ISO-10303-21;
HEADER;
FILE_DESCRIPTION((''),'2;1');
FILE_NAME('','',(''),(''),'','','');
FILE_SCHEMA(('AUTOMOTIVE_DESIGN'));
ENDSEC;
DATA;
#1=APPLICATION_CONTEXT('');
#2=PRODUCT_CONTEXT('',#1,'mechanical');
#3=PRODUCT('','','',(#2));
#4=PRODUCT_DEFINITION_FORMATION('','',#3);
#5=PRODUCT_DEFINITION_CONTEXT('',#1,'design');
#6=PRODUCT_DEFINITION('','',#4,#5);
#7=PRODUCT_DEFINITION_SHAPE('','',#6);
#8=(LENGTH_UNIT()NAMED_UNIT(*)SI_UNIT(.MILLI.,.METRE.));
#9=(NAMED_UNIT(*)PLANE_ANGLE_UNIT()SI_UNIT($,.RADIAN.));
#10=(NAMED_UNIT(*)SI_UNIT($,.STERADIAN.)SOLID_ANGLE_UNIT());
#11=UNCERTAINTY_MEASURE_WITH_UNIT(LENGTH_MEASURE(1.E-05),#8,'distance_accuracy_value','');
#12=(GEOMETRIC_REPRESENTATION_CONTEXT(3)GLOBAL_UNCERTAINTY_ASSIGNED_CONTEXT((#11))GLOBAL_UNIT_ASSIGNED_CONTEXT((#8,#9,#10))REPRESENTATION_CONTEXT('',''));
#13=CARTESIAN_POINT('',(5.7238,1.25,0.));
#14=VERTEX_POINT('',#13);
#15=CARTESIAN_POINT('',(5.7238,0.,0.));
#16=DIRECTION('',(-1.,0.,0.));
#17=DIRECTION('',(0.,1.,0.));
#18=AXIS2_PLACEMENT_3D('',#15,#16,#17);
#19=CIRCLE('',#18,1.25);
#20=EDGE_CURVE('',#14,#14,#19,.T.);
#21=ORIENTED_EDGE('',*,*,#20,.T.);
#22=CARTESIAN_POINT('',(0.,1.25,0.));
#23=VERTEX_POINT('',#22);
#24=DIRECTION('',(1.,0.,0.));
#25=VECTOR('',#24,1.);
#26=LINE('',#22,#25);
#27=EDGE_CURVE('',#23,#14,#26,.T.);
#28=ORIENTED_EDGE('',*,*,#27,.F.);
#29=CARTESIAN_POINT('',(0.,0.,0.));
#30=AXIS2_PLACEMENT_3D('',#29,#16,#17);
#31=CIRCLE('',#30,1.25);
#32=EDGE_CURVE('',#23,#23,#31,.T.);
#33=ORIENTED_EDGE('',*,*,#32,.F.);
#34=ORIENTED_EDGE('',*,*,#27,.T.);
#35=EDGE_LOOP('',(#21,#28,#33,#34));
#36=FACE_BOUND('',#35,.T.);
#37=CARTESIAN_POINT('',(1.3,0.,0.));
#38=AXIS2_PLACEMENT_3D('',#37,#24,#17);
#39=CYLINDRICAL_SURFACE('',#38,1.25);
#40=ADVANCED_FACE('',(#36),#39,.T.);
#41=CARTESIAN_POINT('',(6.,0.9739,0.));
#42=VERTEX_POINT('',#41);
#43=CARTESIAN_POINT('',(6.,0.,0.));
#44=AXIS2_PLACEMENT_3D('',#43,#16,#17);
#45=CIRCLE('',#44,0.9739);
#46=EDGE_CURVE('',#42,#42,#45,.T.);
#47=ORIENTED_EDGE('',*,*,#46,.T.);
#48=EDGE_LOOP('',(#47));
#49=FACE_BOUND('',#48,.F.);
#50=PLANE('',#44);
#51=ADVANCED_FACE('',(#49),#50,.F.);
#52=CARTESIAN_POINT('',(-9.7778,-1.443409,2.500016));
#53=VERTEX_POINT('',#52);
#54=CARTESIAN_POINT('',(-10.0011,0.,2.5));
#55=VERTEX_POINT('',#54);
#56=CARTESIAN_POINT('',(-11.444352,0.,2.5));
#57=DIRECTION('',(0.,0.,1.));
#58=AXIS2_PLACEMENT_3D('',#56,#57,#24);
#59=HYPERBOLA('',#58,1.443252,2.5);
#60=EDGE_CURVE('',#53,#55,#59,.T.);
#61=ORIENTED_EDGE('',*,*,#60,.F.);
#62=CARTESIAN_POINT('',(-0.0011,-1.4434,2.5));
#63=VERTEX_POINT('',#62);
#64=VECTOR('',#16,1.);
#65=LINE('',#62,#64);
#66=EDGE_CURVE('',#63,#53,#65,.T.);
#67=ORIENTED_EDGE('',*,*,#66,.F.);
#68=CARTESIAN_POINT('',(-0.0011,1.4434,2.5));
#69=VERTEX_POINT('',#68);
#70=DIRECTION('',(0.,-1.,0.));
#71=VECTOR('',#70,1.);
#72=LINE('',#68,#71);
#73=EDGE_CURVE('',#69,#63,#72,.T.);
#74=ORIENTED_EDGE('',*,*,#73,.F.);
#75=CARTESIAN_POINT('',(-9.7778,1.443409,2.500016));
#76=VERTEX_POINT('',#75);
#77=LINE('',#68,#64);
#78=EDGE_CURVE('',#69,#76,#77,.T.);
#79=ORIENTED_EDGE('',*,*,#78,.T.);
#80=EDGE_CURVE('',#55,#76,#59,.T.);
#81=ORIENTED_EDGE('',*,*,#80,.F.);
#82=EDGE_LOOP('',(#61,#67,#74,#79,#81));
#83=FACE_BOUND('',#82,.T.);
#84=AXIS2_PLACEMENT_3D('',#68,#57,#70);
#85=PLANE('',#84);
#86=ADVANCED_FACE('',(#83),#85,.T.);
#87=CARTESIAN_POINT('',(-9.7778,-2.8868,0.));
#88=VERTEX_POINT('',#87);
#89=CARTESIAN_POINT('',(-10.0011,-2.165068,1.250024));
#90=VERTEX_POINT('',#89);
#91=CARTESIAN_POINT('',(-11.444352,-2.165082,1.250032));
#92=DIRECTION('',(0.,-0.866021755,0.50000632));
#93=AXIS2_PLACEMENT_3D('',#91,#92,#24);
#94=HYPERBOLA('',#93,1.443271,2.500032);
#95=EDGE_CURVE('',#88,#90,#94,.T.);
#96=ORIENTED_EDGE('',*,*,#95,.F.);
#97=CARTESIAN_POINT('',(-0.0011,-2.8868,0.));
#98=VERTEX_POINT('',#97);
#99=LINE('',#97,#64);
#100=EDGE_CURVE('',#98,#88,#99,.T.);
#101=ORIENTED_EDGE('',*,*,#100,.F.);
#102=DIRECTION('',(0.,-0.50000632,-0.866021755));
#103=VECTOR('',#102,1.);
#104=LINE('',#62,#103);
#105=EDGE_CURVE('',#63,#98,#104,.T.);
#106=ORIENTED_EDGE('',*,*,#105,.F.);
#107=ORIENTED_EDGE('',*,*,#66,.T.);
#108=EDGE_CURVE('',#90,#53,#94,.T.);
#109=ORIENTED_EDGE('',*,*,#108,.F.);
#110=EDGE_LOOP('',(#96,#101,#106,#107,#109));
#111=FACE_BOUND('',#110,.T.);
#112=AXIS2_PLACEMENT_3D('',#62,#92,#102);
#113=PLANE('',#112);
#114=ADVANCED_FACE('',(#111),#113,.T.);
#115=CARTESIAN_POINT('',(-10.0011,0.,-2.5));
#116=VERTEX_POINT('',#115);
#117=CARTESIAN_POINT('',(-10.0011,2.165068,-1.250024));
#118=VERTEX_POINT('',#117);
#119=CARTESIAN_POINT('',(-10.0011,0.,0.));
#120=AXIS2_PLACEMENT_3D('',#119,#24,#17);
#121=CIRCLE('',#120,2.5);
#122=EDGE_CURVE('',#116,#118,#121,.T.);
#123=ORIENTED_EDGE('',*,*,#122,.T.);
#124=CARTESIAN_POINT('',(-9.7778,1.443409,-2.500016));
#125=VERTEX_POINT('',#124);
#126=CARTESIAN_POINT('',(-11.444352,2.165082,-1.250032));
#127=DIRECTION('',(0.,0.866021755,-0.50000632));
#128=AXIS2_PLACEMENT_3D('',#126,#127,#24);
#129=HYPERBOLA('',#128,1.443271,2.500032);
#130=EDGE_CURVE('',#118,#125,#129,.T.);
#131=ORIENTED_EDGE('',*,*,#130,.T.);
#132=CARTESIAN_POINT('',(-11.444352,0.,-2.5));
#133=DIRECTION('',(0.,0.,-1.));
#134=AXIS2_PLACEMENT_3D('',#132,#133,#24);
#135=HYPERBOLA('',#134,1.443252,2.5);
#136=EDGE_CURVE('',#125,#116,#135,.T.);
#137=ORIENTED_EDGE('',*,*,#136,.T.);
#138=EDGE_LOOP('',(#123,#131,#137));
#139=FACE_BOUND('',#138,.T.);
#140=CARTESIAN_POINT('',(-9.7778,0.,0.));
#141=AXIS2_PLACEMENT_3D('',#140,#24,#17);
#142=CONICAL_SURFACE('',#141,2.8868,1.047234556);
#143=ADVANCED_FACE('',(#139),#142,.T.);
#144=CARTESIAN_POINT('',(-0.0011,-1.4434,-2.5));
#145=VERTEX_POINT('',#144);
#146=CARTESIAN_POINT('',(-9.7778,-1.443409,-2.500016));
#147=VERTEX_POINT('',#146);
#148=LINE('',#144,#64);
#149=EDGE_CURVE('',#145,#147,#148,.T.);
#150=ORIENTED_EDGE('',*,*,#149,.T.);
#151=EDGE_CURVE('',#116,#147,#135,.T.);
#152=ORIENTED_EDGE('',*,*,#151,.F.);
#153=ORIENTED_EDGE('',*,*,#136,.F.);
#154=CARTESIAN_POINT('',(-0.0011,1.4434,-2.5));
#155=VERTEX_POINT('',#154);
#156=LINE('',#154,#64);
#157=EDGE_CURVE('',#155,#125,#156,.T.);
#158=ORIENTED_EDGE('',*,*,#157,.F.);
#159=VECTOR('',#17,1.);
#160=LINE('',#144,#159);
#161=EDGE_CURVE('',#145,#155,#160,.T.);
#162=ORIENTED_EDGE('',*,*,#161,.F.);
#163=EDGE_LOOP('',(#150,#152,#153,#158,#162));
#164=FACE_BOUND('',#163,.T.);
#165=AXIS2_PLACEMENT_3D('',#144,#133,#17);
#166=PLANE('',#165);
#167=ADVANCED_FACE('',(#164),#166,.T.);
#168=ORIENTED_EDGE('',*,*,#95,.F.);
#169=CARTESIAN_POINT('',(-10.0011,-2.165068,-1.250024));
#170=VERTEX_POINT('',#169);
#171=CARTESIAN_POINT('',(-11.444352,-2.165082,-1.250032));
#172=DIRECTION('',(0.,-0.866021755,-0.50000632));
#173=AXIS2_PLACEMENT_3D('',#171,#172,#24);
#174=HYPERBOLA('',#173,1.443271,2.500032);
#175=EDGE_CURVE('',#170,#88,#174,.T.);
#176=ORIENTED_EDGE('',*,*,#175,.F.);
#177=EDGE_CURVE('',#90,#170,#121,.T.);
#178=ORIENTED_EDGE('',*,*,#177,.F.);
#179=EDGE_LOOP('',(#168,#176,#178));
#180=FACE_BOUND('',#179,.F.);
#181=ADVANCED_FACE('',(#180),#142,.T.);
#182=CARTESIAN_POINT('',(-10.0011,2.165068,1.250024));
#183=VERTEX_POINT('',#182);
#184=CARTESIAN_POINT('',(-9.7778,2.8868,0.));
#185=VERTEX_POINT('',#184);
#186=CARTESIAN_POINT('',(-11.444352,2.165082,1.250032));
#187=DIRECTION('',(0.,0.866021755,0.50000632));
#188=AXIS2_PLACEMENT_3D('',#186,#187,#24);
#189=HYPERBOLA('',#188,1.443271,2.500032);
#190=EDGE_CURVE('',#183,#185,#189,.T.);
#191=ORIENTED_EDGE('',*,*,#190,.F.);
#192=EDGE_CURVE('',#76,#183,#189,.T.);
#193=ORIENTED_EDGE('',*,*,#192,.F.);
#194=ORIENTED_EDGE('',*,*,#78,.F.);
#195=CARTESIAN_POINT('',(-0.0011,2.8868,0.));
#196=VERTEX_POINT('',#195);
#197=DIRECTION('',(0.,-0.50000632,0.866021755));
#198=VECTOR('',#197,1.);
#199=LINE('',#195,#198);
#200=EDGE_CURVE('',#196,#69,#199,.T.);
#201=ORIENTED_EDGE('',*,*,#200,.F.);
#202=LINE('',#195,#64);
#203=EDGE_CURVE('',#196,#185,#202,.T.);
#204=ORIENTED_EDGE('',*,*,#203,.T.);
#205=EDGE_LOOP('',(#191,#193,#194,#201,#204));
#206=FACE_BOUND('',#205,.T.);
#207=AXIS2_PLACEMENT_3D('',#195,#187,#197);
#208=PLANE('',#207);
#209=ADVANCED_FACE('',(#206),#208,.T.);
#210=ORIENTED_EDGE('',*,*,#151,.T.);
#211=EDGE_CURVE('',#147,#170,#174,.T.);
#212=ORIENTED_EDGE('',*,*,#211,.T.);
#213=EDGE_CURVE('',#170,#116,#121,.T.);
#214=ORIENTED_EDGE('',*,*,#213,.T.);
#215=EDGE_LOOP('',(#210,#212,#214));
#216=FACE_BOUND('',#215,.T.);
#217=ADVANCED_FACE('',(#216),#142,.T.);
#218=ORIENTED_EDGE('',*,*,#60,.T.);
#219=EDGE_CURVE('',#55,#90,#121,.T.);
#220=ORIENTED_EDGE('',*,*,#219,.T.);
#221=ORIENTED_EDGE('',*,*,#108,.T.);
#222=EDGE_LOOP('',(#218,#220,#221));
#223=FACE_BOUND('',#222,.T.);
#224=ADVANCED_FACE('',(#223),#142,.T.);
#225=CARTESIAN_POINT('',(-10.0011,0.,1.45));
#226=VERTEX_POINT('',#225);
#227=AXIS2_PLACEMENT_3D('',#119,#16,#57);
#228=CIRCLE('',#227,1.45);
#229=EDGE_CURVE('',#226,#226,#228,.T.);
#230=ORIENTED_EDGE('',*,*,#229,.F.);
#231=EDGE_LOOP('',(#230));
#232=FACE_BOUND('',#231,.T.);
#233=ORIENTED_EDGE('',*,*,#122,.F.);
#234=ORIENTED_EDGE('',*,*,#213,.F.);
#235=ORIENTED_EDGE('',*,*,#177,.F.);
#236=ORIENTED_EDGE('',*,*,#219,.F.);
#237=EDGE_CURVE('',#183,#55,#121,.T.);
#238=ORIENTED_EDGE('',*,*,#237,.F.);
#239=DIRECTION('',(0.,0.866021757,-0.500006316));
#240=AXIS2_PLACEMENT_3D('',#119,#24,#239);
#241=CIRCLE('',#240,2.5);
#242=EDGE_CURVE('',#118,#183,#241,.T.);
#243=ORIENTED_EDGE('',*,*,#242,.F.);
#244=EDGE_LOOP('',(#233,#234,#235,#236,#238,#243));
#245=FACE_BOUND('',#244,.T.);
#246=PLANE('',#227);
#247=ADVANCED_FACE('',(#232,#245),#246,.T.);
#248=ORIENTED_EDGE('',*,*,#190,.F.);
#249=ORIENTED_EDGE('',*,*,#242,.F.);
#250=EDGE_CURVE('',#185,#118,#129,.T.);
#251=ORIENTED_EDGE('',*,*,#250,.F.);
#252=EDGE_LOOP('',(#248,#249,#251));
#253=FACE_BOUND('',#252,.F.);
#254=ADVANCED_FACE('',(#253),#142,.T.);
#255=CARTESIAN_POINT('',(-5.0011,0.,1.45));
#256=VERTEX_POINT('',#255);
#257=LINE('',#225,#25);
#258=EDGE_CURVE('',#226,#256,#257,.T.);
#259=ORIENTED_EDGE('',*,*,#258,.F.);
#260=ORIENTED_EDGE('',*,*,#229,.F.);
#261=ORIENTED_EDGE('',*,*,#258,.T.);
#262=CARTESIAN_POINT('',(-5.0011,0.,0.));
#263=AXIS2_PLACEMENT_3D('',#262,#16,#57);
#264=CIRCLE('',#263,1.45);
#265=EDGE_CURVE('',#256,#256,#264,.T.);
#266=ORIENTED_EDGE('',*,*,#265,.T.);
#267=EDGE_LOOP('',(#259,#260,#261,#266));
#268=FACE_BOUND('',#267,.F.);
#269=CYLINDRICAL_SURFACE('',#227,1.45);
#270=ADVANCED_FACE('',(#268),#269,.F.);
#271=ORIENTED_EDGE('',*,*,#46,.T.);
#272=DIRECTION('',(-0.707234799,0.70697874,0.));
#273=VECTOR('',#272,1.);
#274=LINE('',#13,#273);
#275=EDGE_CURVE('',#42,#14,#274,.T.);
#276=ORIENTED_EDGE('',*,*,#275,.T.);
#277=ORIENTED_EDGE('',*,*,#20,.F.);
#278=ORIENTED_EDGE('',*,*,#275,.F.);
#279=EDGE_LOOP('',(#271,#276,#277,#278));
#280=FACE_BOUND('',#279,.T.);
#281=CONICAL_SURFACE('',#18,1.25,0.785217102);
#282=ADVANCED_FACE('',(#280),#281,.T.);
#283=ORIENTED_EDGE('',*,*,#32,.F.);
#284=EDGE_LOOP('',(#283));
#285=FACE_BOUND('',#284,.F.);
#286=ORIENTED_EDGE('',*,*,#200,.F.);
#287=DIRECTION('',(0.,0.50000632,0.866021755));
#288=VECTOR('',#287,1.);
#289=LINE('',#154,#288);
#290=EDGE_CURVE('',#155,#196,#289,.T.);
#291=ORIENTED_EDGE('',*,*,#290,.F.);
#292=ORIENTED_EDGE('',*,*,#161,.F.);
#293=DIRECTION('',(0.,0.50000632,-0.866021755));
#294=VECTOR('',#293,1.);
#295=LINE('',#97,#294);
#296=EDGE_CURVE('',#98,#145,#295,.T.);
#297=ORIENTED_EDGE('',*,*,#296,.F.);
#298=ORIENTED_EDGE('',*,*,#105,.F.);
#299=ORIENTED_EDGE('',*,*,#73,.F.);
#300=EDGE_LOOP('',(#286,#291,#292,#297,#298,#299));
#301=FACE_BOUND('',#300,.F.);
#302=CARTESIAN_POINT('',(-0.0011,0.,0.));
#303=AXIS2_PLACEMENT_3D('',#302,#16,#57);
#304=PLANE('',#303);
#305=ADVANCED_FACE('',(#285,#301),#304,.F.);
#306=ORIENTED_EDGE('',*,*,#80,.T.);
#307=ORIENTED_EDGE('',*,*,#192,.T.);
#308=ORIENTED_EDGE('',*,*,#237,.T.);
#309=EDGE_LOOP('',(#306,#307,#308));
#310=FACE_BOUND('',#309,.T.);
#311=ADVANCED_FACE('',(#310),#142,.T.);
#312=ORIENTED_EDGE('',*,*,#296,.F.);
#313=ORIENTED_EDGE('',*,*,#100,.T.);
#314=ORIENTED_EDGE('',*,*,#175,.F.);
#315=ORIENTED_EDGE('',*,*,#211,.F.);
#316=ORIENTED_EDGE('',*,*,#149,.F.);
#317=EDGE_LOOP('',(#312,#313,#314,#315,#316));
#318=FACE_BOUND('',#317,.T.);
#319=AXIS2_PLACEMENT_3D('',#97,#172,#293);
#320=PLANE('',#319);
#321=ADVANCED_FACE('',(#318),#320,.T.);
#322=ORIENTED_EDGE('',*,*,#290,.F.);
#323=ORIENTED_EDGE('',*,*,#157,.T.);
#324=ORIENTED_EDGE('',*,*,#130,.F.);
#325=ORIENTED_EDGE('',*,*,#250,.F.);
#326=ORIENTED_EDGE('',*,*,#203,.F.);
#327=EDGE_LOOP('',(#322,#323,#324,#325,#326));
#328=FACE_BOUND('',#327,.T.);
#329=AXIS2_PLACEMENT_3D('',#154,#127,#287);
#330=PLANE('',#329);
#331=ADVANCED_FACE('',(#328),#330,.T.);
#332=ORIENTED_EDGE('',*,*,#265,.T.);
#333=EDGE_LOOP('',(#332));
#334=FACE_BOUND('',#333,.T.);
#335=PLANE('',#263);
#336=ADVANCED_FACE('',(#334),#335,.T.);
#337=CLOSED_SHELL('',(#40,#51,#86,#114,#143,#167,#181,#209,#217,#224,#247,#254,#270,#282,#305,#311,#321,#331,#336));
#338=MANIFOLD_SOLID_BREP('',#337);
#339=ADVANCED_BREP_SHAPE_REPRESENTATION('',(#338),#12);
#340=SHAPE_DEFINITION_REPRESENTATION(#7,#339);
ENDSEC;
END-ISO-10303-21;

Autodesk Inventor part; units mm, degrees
ref_plane "YZ Plane" through (0, 0, 0) normal (1, 0, 0) x (0, 1, 0)
ref_plane "XZ Plane" through (0, 0, 0) normal (0, 1, 0) x (-1, 0, 0)
sketch "Sketch1" plane through (0, 0, 0) normal (0, 0, 1) x (1, 0, 0)
  line L0 (0, 2.5) -> (0, 1.25)
  line L1 (1.3, 1.25) -> (6, 1.25)
  line L2 (6, 1.25) -> (6, 0)
  line L3 (6, 0) -> (-0.0011, 0)
  line L4 (-1.2013, 0) -> (7.2002, 0) projected
  line L5 (-0.0011, 0) -> (-0.0011, 2.5)
  line L6 (-0.0011, 2.5) -> (0, 2.5)
  line L7 (1.3, 1.25) -> (1.0238, 1.25)
  line L8 (1.0238, 1.25) -> (0, 1.25)
  line L9 (0, -0.5) -> (0, 3) projected
  dimension "d0" = 6
  dimension "d1" = 4.7
  dimension "d2" = 2.5
  dimension "d9" = 0.0011
  dimension "d10" = 5
  dimension "d13" = 0.2762
  dimension "d14" = 2.5
revolve "Body" add sketch "Sketch1" angle 360 about axis through (6, 0, 0) along (-1, 0, 0)
sketch "Sketch2" plane through (-0.0011, 0, 0) normal (-1, 0, 0) x (0, 0, 1)
  line L0 (0, 2.8868) -> (2.5, 1.4434)
  line L1 (2.5, 1.4434) -> (2.5, -1.4434)
  line L2 (2.5, -1.4434) -> (0, -2.8868)
  line L3 (0, -2.8868) -> (-2.5, -1.4434)
  line L4 (-2.5, -1.4434) -> (-2.5, 1.4434)
  line L5 (-2.5, 1.4434) -> (0, 2.8868)
  point P0 (0, 0)
  point P1 (0, 0)
  dimension "d11" = 5
extrude "Head" add sketch "Sketch2" along normal blind 10
sketch "Sketch4" plane through (0, 0, 0) normal (0, 0, 1) x (1, 0, 0)
  line L0 (-10.0011, 2.5) -> (-10.0011, 2.8868)
  line L1 (-10.0011, 2.8868) -> (-9.7778, 2.8868)
  line L2 (-9.7778, 2.8868) -> (-10.0011, 2.5)
  line L3 (-2.0399, 0) -> (0.3387, 0) projected
  line L4 (-0.0011, 2.8868) -> (-10.0011, 2.8868) projected
  line L5 (-10.0011, 1.4434) -> (-10.0011, 2.8868) projected
  dimension "d5" = 30
  dimension "d19" = 5
revolve "Chamfer1" cut sketch "Sketch4" angle 360 about axis through (-10, 0, 0) along (1, 0, 0)
thread "Thread" size "M2.5x0.45" class "6g" standard "ISO Metric profile" length 4.7
chamfer "Chamfer2" distance 0.2761 distance2 0.2762 1 edges at (6, -1.25, 0) measured on face at (6, -0.3871, 0.3429)
ref_plane "Work Plane1" through (1.525, 0, 0) normal (0, 0, 1) x (1, 0, 0)
sketch "Sketch7" plane through (-10.0011, 0, 0) normal (-1, 0, 0) x (0, 0, 1)
  circle A0 centre (0, 0) radius 1.45
  point P0 (0, 0)
  dimension "d59" = 2.9
extrude "Extrusion5" cut sketch "Sketch7" against normal blind 5
equation "\"d11\" = SW"
equation "\"d15\" = GEL"
equation "\"d6\" = -0.5 * SPD + 0.5 * GD"
equation "\"d0\" = NLG"
equation "\"d1\" = GEL"
equation "\"d2\" = GD"
equation "\"d10\" = SD2"
equation "\"d14\" = BDM"
equation "\"d5\" = ANG1"
equation "\"d19\" = SW0"
equation "\"NLG\" = 6"
equation "\"GD\" = NND"
equation "\"BDM\" = NND"
equation "\"KOH\" = 1.7"
equation "\"GEL\" = 4.7"
equation "\"SW\" = 5"
equation "\"SW0\" = SW"
equation "\"SPD\" = NND - 1.2269 * PTC"
equation "\"SD2\" = SW"
equation "\"SD\" = 0.001"
equation "\"ANG1\" = 30deg"
equation "\"GAL\" = 0.61345 * PTC"
equation "\"GUL\" = 0.61345 * PTC"
equation "\"RR\" = 0.001"
equation "\"WFT\" = SD"
equation "\"GD1\" = THREADDIA - 1.2269 * PTC"
equation "\"THREADDIA\" = 2.5"
equation "\"SDH\" = SW"
equation "\"TOA\" = 30deg"
equation "\"FAWI\" = 45deg"
equation "\"PTC\" = 0.45"
equation "\"NND\" = 2.5"
equation "\"E0\" = 1.155 * SW"
properties part number "AS 1110 - M2.5 x 6" material "Steel, Mild"
